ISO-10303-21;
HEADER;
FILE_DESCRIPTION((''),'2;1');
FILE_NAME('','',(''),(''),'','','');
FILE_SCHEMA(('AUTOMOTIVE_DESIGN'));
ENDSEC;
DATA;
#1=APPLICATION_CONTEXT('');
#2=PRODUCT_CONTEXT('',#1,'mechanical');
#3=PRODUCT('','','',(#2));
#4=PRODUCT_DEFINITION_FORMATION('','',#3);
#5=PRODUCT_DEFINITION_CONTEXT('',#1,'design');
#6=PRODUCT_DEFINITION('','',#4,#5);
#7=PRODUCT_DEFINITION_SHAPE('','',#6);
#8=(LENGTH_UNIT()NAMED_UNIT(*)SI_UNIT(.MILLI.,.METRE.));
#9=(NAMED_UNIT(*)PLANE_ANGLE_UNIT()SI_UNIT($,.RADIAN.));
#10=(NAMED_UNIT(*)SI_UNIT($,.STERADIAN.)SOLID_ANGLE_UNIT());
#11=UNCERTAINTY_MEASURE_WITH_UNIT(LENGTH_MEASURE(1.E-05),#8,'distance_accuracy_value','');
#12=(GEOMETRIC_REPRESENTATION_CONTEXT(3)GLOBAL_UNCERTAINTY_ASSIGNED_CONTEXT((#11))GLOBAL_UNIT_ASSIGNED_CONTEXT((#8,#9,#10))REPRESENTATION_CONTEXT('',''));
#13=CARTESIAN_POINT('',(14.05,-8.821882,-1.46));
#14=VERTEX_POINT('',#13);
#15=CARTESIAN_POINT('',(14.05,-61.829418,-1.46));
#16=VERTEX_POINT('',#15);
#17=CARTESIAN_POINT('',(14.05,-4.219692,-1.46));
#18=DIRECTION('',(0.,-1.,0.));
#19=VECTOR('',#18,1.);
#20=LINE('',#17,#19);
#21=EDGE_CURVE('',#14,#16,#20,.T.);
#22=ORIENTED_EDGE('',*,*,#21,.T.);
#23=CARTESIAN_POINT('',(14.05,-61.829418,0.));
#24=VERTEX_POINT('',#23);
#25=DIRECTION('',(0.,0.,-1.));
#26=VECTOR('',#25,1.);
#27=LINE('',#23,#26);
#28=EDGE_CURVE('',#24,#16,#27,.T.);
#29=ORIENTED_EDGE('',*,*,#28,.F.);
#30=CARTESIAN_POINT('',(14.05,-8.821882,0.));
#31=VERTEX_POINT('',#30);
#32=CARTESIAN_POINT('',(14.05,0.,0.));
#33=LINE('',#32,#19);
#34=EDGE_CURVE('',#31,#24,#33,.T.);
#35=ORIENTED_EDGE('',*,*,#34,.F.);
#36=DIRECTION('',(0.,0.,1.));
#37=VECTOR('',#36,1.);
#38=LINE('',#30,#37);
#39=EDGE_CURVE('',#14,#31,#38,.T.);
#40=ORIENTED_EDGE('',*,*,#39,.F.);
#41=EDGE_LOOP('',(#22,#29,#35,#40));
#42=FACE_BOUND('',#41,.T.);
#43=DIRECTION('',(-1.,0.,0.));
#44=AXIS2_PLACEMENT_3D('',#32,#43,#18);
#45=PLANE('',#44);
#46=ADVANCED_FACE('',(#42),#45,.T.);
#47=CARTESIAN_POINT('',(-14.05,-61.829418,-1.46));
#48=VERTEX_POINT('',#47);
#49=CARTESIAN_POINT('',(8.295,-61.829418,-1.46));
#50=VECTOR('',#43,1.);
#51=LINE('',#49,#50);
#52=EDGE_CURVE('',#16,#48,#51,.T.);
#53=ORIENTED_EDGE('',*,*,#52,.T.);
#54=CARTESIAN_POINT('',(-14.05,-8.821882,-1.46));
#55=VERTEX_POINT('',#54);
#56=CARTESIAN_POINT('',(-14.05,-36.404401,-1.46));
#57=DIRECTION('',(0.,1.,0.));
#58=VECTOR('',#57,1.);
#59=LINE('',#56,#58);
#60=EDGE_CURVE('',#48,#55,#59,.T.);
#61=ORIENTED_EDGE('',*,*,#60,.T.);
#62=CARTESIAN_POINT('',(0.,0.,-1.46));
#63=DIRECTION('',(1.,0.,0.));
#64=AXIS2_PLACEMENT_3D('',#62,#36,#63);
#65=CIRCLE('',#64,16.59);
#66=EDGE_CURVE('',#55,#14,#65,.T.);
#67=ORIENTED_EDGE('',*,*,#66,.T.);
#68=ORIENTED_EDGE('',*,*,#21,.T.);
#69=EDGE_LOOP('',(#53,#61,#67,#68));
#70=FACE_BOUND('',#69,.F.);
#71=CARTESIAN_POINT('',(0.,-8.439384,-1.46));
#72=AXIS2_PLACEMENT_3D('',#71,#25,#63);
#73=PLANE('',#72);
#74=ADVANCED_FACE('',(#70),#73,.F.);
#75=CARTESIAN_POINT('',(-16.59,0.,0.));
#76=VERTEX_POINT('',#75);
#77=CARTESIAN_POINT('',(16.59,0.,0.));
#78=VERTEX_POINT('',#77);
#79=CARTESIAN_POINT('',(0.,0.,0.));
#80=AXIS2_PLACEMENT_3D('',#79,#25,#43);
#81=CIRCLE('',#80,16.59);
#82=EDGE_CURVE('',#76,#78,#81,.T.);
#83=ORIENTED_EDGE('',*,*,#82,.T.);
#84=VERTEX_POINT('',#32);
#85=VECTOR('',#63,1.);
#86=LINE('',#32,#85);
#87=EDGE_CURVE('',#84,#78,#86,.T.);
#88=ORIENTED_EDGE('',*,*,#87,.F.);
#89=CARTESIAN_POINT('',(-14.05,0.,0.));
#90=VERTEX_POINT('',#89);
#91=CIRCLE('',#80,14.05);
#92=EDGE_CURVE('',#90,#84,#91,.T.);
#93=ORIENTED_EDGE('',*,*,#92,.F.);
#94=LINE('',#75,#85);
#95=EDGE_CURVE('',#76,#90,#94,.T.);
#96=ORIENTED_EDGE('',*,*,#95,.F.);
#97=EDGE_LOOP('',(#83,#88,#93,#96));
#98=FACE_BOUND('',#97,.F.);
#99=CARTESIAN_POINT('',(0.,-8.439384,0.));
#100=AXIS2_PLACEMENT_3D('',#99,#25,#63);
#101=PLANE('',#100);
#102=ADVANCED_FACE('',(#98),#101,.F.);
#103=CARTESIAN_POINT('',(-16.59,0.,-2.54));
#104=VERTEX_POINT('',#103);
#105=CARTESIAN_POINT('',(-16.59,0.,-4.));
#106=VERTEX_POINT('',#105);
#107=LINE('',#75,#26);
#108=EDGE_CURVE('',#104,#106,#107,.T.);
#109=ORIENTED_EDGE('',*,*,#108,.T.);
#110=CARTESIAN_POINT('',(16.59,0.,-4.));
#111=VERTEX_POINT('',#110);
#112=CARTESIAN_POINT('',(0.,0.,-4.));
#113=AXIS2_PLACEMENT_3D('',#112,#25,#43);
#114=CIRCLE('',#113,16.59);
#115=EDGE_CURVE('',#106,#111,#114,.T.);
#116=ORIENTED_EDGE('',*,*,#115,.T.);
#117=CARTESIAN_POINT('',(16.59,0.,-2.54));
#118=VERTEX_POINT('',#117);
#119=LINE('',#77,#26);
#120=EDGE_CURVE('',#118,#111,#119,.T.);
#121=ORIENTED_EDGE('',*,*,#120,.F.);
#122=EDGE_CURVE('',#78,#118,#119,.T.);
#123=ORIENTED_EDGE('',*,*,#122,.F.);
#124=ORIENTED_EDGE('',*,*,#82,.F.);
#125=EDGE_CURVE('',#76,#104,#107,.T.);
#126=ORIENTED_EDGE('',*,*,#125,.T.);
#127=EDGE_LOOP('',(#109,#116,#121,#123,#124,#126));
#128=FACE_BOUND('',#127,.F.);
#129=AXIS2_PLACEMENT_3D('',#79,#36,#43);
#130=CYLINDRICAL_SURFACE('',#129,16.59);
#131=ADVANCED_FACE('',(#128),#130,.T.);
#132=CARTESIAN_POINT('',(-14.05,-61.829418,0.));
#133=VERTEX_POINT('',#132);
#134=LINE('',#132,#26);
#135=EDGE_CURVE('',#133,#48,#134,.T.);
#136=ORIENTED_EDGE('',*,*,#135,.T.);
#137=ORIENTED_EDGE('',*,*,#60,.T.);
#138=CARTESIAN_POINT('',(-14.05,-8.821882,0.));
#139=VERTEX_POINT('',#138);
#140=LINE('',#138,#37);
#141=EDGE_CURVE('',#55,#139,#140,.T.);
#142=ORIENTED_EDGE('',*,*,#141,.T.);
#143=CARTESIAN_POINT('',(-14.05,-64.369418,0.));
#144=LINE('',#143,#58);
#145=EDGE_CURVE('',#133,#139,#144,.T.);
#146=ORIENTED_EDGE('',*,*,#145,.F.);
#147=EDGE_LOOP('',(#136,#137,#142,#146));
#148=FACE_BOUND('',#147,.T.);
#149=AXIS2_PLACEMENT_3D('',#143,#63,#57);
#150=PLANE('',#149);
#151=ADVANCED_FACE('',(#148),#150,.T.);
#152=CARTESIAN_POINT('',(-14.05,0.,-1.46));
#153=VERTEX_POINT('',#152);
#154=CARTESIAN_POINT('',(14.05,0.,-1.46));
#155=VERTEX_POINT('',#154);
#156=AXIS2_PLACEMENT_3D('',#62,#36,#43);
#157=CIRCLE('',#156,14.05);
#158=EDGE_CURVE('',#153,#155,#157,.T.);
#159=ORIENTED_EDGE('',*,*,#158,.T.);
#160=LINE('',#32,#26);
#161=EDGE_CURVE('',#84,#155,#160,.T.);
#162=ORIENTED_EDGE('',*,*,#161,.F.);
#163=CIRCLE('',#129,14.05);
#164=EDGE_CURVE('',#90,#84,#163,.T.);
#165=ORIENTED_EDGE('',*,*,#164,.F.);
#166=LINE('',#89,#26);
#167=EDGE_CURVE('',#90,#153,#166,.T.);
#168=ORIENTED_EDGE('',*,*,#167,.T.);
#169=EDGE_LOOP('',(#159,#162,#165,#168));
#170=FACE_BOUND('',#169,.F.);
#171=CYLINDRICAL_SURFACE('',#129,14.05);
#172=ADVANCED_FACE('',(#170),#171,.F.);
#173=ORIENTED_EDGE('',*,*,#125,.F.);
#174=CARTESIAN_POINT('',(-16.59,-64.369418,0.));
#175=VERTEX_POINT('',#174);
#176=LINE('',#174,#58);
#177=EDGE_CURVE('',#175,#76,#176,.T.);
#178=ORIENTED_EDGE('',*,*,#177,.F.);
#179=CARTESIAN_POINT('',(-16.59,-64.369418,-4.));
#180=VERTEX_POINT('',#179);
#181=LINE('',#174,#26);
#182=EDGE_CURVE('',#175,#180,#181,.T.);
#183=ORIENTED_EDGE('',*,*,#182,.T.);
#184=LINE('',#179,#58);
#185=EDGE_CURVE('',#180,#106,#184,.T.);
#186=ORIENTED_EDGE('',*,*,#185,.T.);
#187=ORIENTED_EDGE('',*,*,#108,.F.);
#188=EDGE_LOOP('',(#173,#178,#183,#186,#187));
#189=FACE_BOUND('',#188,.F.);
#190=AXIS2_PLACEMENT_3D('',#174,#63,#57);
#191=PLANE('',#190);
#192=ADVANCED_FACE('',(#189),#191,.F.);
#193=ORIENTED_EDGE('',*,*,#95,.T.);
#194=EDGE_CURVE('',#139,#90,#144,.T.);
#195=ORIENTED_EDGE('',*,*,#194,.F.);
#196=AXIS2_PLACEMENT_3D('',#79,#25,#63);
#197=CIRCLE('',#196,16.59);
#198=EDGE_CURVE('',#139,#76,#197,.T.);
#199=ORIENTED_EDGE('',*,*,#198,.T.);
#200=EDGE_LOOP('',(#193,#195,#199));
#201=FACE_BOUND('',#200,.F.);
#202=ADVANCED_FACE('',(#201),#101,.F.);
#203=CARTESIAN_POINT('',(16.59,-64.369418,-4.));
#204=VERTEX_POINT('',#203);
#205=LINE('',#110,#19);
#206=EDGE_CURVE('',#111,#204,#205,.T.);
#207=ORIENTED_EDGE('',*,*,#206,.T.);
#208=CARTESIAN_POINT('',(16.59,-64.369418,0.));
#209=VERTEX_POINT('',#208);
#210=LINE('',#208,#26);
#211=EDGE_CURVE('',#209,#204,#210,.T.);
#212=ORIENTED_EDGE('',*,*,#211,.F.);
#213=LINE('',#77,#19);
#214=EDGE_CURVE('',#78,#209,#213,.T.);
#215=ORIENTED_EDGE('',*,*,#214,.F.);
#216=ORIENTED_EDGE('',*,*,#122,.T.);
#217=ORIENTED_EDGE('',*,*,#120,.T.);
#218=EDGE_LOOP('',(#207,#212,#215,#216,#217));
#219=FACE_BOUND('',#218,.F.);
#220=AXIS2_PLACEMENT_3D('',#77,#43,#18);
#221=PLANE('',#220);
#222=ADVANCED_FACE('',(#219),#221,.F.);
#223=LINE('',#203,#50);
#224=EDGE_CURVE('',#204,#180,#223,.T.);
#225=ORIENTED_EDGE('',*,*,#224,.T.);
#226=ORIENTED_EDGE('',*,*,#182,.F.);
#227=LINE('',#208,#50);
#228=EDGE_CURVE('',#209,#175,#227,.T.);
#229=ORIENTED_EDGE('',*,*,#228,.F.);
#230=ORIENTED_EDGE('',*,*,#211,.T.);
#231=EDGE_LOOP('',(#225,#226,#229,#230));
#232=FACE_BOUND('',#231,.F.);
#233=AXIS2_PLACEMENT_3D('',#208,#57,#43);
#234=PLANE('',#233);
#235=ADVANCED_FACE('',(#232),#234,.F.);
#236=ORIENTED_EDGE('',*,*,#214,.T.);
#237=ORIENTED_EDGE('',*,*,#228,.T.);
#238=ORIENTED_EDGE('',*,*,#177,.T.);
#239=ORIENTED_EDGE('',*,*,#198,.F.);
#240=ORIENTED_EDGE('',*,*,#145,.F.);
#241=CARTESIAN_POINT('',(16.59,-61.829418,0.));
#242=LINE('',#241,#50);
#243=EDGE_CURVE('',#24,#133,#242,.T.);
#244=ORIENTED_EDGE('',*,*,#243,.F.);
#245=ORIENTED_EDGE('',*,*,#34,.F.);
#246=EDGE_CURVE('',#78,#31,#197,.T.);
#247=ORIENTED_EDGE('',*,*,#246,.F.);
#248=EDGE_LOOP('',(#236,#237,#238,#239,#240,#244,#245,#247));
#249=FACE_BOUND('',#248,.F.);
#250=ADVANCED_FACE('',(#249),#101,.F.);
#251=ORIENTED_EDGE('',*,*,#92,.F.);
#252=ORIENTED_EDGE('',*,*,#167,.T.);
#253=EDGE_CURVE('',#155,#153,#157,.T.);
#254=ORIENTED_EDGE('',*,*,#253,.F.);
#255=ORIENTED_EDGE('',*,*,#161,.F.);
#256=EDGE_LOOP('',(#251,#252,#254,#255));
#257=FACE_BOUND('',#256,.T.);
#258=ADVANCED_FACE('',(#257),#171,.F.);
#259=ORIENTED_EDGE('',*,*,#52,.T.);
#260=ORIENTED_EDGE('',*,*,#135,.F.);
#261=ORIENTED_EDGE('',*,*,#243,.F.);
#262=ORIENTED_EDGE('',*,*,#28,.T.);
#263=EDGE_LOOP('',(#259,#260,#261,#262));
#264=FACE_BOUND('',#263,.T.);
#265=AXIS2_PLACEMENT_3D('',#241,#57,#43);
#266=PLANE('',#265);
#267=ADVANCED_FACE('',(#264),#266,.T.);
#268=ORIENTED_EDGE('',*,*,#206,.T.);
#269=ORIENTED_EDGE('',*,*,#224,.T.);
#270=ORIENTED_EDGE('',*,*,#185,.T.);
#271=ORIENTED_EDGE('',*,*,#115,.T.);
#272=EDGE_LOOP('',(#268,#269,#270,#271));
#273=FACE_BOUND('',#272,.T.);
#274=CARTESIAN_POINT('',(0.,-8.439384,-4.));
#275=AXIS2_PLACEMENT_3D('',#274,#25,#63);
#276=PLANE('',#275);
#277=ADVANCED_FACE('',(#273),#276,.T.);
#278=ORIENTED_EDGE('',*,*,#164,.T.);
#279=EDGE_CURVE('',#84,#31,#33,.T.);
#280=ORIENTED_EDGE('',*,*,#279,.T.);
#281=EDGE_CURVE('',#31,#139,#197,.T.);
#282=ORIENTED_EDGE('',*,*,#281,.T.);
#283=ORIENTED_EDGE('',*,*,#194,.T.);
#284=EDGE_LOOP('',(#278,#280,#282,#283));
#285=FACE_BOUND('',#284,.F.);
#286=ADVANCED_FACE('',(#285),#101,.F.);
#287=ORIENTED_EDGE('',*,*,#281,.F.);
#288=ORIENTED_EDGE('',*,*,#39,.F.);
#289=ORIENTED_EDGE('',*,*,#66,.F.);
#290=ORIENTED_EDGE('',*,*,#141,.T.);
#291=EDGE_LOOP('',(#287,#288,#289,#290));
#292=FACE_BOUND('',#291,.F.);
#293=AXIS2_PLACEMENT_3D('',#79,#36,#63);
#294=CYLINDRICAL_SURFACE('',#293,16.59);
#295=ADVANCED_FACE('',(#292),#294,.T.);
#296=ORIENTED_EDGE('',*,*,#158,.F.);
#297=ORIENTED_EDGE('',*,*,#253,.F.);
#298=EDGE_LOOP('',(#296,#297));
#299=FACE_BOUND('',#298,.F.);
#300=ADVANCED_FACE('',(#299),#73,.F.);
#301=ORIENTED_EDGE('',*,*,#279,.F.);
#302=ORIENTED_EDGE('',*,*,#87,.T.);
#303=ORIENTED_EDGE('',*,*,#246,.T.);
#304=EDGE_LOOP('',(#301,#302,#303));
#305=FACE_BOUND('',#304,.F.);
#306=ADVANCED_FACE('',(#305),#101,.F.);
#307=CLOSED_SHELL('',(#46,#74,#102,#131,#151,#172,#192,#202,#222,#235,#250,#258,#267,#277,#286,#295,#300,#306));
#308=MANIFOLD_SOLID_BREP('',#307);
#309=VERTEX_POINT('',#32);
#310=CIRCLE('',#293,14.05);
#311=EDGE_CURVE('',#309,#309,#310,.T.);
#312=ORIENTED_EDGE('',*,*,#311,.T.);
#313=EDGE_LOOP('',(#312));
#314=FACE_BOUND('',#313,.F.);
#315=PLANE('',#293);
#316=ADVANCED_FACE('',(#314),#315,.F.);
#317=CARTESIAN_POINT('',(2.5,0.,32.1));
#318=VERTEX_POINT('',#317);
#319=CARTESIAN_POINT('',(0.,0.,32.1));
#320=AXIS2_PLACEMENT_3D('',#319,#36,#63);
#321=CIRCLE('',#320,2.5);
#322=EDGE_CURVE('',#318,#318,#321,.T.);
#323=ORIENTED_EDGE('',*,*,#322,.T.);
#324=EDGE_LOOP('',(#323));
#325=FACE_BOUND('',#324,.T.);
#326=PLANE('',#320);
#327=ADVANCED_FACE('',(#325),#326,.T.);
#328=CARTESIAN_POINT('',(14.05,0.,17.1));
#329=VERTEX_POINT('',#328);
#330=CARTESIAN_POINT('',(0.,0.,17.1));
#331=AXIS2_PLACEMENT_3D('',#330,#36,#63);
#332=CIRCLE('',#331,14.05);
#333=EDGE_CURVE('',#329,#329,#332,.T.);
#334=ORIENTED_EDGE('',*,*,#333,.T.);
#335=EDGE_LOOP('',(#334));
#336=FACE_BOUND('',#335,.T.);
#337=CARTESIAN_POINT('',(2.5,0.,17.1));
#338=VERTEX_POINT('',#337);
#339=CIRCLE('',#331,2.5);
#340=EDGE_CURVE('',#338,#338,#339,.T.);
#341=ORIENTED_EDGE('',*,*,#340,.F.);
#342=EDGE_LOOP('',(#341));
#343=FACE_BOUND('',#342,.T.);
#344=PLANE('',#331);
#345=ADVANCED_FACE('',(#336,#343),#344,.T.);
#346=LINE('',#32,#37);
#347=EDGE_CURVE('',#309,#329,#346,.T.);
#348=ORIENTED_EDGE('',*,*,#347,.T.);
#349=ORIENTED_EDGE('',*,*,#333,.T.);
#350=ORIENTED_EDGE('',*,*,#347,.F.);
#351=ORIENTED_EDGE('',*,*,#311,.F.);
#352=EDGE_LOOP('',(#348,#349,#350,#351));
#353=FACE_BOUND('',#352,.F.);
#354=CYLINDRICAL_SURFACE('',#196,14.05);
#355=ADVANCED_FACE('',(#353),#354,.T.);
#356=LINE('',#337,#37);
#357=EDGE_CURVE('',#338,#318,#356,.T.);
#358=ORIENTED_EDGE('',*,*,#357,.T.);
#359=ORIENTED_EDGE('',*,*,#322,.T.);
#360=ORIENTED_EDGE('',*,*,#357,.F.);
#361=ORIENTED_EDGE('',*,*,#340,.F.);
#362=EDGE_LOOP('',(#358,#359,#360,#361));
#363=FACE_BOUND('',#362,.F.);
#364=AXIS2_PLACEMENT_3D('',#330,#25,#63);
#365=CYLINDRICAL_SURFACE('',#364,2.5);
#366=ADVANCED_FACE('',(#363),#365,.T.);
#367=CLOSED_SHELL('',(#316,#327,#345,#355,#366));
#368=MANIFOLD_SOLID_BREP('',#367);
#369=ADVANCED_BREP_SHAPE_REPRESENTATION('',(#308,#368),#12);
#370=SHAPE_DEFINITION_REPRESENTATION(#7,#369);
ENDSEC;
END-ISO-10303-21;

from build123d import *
from build123d import SkipClean  # not in build123d's __all__

# Parameters (mm, degrees)
F0_R     = 14.05
F1_DEPTH = 17.1
F2_R     = 2.5
F3_DEPTH = 15
F5_DEPTH = 4
F6_T     = -2.54
F7_DEPTH = 2.54


with BuildPart() as f1:
    # F0 (on Top) → F1 (new body)
    with BuildSketch(Plane.XY):
        Circle(F0_R)
    extrude(amount=F1_DEPTH)

    # F2 (on face) → F3 (join)
    with BuildSketch(Plane.XY.offset(17.1)):
        Circle(F2_R)
    extrude(amount=F3_DEPTH)


with BuildPart() as f5:
    # F4 (on face) → F5 (new body)
    with BuildSketch(Plane(origin=(0, 0, 0), x_dir=(1, 0, 0), z_dir=(0, 0, -1))):
        with BuildLine():
            Line((14.05, 0), (16.59, 0))
            ThreePointArc((16.59, 0), (0, 16.59), (-16.59, 0))
            Line((-16.59, 0), (-14.05, 0))
            ThreePointArc((-14.05, 0), (0, 14.05), (14.05, 0))
        make_face()
        with BuildLine():
            ThreePointArc((-16.59, 0), (0, -16.59), (16.59, 0))
            Line((16.59, 0), (14.05, 0))
            ThreePointArc((14.05, 0), (0, -14.05), (-14.05, 0))
            Line((-14.05, 0), (-16.59, 0))
        make_face()
        with BuildLine():
            ThreePointArc((-16.59, 0), (0, 16.59), (16.59, 0))
            Line((16.59, 0), (16.59, 64.369417727))
            Line((16.59, 64.369417727), (0, 64.369417727))
            Line((0, 64.369417727), (-16.59, 64.369417727))
            Line((-16.59, 64.369417727), (-16.59, 0))
        make_face()
        with BuildLine():
            ThreePointArc((-14.05, 0), (0, -14.05), (14.05, 0))
            Line((14.05, 0), (0, 0))
            Line((0, 0), (-14.05, 0))
        make_face()
        with BuildLine():
            Line((0, 0), (14.05, 0))
            ThreePointArc((14.05, 0), (0, 14.05), (-14.05, 0))
            Line((-14.05, 0), (0, 0))
        make_face()
    extrude(amount=F5_DEPTH)

    # F6
    f6_openings = [f5.faces().sort_by_distance(p)[0] for p in [
        (0, -25.581259, 0),
    ]]
    offset(amount=F6_T, openings=f6_openings)

    # F4 (on face) → F7 (join)
    with BuildSketch(Plane(origin=(0, 0, 0), x_dir=(1, 0, 0), z_dir=(0, 0, -1))):
        with BuildLine():
            Line((14.05, 0), (16.59, 0))
            ThreePointArc((16.59, 0), (0, 16.59), (-16.59, 0))
            Line((-16.59, 0), (-14.05, 0))
            ThreePointArc((-14.05, 0), (0, 14.05), (14.05, 0))
        make_face()
    with SkipClean():  # cleaning this boolean's faces spoils the solid; the shape is the same uncleaned
        extrude(amount=F7_DEPTH)


solid = Compound([f1.part, f5.part])
